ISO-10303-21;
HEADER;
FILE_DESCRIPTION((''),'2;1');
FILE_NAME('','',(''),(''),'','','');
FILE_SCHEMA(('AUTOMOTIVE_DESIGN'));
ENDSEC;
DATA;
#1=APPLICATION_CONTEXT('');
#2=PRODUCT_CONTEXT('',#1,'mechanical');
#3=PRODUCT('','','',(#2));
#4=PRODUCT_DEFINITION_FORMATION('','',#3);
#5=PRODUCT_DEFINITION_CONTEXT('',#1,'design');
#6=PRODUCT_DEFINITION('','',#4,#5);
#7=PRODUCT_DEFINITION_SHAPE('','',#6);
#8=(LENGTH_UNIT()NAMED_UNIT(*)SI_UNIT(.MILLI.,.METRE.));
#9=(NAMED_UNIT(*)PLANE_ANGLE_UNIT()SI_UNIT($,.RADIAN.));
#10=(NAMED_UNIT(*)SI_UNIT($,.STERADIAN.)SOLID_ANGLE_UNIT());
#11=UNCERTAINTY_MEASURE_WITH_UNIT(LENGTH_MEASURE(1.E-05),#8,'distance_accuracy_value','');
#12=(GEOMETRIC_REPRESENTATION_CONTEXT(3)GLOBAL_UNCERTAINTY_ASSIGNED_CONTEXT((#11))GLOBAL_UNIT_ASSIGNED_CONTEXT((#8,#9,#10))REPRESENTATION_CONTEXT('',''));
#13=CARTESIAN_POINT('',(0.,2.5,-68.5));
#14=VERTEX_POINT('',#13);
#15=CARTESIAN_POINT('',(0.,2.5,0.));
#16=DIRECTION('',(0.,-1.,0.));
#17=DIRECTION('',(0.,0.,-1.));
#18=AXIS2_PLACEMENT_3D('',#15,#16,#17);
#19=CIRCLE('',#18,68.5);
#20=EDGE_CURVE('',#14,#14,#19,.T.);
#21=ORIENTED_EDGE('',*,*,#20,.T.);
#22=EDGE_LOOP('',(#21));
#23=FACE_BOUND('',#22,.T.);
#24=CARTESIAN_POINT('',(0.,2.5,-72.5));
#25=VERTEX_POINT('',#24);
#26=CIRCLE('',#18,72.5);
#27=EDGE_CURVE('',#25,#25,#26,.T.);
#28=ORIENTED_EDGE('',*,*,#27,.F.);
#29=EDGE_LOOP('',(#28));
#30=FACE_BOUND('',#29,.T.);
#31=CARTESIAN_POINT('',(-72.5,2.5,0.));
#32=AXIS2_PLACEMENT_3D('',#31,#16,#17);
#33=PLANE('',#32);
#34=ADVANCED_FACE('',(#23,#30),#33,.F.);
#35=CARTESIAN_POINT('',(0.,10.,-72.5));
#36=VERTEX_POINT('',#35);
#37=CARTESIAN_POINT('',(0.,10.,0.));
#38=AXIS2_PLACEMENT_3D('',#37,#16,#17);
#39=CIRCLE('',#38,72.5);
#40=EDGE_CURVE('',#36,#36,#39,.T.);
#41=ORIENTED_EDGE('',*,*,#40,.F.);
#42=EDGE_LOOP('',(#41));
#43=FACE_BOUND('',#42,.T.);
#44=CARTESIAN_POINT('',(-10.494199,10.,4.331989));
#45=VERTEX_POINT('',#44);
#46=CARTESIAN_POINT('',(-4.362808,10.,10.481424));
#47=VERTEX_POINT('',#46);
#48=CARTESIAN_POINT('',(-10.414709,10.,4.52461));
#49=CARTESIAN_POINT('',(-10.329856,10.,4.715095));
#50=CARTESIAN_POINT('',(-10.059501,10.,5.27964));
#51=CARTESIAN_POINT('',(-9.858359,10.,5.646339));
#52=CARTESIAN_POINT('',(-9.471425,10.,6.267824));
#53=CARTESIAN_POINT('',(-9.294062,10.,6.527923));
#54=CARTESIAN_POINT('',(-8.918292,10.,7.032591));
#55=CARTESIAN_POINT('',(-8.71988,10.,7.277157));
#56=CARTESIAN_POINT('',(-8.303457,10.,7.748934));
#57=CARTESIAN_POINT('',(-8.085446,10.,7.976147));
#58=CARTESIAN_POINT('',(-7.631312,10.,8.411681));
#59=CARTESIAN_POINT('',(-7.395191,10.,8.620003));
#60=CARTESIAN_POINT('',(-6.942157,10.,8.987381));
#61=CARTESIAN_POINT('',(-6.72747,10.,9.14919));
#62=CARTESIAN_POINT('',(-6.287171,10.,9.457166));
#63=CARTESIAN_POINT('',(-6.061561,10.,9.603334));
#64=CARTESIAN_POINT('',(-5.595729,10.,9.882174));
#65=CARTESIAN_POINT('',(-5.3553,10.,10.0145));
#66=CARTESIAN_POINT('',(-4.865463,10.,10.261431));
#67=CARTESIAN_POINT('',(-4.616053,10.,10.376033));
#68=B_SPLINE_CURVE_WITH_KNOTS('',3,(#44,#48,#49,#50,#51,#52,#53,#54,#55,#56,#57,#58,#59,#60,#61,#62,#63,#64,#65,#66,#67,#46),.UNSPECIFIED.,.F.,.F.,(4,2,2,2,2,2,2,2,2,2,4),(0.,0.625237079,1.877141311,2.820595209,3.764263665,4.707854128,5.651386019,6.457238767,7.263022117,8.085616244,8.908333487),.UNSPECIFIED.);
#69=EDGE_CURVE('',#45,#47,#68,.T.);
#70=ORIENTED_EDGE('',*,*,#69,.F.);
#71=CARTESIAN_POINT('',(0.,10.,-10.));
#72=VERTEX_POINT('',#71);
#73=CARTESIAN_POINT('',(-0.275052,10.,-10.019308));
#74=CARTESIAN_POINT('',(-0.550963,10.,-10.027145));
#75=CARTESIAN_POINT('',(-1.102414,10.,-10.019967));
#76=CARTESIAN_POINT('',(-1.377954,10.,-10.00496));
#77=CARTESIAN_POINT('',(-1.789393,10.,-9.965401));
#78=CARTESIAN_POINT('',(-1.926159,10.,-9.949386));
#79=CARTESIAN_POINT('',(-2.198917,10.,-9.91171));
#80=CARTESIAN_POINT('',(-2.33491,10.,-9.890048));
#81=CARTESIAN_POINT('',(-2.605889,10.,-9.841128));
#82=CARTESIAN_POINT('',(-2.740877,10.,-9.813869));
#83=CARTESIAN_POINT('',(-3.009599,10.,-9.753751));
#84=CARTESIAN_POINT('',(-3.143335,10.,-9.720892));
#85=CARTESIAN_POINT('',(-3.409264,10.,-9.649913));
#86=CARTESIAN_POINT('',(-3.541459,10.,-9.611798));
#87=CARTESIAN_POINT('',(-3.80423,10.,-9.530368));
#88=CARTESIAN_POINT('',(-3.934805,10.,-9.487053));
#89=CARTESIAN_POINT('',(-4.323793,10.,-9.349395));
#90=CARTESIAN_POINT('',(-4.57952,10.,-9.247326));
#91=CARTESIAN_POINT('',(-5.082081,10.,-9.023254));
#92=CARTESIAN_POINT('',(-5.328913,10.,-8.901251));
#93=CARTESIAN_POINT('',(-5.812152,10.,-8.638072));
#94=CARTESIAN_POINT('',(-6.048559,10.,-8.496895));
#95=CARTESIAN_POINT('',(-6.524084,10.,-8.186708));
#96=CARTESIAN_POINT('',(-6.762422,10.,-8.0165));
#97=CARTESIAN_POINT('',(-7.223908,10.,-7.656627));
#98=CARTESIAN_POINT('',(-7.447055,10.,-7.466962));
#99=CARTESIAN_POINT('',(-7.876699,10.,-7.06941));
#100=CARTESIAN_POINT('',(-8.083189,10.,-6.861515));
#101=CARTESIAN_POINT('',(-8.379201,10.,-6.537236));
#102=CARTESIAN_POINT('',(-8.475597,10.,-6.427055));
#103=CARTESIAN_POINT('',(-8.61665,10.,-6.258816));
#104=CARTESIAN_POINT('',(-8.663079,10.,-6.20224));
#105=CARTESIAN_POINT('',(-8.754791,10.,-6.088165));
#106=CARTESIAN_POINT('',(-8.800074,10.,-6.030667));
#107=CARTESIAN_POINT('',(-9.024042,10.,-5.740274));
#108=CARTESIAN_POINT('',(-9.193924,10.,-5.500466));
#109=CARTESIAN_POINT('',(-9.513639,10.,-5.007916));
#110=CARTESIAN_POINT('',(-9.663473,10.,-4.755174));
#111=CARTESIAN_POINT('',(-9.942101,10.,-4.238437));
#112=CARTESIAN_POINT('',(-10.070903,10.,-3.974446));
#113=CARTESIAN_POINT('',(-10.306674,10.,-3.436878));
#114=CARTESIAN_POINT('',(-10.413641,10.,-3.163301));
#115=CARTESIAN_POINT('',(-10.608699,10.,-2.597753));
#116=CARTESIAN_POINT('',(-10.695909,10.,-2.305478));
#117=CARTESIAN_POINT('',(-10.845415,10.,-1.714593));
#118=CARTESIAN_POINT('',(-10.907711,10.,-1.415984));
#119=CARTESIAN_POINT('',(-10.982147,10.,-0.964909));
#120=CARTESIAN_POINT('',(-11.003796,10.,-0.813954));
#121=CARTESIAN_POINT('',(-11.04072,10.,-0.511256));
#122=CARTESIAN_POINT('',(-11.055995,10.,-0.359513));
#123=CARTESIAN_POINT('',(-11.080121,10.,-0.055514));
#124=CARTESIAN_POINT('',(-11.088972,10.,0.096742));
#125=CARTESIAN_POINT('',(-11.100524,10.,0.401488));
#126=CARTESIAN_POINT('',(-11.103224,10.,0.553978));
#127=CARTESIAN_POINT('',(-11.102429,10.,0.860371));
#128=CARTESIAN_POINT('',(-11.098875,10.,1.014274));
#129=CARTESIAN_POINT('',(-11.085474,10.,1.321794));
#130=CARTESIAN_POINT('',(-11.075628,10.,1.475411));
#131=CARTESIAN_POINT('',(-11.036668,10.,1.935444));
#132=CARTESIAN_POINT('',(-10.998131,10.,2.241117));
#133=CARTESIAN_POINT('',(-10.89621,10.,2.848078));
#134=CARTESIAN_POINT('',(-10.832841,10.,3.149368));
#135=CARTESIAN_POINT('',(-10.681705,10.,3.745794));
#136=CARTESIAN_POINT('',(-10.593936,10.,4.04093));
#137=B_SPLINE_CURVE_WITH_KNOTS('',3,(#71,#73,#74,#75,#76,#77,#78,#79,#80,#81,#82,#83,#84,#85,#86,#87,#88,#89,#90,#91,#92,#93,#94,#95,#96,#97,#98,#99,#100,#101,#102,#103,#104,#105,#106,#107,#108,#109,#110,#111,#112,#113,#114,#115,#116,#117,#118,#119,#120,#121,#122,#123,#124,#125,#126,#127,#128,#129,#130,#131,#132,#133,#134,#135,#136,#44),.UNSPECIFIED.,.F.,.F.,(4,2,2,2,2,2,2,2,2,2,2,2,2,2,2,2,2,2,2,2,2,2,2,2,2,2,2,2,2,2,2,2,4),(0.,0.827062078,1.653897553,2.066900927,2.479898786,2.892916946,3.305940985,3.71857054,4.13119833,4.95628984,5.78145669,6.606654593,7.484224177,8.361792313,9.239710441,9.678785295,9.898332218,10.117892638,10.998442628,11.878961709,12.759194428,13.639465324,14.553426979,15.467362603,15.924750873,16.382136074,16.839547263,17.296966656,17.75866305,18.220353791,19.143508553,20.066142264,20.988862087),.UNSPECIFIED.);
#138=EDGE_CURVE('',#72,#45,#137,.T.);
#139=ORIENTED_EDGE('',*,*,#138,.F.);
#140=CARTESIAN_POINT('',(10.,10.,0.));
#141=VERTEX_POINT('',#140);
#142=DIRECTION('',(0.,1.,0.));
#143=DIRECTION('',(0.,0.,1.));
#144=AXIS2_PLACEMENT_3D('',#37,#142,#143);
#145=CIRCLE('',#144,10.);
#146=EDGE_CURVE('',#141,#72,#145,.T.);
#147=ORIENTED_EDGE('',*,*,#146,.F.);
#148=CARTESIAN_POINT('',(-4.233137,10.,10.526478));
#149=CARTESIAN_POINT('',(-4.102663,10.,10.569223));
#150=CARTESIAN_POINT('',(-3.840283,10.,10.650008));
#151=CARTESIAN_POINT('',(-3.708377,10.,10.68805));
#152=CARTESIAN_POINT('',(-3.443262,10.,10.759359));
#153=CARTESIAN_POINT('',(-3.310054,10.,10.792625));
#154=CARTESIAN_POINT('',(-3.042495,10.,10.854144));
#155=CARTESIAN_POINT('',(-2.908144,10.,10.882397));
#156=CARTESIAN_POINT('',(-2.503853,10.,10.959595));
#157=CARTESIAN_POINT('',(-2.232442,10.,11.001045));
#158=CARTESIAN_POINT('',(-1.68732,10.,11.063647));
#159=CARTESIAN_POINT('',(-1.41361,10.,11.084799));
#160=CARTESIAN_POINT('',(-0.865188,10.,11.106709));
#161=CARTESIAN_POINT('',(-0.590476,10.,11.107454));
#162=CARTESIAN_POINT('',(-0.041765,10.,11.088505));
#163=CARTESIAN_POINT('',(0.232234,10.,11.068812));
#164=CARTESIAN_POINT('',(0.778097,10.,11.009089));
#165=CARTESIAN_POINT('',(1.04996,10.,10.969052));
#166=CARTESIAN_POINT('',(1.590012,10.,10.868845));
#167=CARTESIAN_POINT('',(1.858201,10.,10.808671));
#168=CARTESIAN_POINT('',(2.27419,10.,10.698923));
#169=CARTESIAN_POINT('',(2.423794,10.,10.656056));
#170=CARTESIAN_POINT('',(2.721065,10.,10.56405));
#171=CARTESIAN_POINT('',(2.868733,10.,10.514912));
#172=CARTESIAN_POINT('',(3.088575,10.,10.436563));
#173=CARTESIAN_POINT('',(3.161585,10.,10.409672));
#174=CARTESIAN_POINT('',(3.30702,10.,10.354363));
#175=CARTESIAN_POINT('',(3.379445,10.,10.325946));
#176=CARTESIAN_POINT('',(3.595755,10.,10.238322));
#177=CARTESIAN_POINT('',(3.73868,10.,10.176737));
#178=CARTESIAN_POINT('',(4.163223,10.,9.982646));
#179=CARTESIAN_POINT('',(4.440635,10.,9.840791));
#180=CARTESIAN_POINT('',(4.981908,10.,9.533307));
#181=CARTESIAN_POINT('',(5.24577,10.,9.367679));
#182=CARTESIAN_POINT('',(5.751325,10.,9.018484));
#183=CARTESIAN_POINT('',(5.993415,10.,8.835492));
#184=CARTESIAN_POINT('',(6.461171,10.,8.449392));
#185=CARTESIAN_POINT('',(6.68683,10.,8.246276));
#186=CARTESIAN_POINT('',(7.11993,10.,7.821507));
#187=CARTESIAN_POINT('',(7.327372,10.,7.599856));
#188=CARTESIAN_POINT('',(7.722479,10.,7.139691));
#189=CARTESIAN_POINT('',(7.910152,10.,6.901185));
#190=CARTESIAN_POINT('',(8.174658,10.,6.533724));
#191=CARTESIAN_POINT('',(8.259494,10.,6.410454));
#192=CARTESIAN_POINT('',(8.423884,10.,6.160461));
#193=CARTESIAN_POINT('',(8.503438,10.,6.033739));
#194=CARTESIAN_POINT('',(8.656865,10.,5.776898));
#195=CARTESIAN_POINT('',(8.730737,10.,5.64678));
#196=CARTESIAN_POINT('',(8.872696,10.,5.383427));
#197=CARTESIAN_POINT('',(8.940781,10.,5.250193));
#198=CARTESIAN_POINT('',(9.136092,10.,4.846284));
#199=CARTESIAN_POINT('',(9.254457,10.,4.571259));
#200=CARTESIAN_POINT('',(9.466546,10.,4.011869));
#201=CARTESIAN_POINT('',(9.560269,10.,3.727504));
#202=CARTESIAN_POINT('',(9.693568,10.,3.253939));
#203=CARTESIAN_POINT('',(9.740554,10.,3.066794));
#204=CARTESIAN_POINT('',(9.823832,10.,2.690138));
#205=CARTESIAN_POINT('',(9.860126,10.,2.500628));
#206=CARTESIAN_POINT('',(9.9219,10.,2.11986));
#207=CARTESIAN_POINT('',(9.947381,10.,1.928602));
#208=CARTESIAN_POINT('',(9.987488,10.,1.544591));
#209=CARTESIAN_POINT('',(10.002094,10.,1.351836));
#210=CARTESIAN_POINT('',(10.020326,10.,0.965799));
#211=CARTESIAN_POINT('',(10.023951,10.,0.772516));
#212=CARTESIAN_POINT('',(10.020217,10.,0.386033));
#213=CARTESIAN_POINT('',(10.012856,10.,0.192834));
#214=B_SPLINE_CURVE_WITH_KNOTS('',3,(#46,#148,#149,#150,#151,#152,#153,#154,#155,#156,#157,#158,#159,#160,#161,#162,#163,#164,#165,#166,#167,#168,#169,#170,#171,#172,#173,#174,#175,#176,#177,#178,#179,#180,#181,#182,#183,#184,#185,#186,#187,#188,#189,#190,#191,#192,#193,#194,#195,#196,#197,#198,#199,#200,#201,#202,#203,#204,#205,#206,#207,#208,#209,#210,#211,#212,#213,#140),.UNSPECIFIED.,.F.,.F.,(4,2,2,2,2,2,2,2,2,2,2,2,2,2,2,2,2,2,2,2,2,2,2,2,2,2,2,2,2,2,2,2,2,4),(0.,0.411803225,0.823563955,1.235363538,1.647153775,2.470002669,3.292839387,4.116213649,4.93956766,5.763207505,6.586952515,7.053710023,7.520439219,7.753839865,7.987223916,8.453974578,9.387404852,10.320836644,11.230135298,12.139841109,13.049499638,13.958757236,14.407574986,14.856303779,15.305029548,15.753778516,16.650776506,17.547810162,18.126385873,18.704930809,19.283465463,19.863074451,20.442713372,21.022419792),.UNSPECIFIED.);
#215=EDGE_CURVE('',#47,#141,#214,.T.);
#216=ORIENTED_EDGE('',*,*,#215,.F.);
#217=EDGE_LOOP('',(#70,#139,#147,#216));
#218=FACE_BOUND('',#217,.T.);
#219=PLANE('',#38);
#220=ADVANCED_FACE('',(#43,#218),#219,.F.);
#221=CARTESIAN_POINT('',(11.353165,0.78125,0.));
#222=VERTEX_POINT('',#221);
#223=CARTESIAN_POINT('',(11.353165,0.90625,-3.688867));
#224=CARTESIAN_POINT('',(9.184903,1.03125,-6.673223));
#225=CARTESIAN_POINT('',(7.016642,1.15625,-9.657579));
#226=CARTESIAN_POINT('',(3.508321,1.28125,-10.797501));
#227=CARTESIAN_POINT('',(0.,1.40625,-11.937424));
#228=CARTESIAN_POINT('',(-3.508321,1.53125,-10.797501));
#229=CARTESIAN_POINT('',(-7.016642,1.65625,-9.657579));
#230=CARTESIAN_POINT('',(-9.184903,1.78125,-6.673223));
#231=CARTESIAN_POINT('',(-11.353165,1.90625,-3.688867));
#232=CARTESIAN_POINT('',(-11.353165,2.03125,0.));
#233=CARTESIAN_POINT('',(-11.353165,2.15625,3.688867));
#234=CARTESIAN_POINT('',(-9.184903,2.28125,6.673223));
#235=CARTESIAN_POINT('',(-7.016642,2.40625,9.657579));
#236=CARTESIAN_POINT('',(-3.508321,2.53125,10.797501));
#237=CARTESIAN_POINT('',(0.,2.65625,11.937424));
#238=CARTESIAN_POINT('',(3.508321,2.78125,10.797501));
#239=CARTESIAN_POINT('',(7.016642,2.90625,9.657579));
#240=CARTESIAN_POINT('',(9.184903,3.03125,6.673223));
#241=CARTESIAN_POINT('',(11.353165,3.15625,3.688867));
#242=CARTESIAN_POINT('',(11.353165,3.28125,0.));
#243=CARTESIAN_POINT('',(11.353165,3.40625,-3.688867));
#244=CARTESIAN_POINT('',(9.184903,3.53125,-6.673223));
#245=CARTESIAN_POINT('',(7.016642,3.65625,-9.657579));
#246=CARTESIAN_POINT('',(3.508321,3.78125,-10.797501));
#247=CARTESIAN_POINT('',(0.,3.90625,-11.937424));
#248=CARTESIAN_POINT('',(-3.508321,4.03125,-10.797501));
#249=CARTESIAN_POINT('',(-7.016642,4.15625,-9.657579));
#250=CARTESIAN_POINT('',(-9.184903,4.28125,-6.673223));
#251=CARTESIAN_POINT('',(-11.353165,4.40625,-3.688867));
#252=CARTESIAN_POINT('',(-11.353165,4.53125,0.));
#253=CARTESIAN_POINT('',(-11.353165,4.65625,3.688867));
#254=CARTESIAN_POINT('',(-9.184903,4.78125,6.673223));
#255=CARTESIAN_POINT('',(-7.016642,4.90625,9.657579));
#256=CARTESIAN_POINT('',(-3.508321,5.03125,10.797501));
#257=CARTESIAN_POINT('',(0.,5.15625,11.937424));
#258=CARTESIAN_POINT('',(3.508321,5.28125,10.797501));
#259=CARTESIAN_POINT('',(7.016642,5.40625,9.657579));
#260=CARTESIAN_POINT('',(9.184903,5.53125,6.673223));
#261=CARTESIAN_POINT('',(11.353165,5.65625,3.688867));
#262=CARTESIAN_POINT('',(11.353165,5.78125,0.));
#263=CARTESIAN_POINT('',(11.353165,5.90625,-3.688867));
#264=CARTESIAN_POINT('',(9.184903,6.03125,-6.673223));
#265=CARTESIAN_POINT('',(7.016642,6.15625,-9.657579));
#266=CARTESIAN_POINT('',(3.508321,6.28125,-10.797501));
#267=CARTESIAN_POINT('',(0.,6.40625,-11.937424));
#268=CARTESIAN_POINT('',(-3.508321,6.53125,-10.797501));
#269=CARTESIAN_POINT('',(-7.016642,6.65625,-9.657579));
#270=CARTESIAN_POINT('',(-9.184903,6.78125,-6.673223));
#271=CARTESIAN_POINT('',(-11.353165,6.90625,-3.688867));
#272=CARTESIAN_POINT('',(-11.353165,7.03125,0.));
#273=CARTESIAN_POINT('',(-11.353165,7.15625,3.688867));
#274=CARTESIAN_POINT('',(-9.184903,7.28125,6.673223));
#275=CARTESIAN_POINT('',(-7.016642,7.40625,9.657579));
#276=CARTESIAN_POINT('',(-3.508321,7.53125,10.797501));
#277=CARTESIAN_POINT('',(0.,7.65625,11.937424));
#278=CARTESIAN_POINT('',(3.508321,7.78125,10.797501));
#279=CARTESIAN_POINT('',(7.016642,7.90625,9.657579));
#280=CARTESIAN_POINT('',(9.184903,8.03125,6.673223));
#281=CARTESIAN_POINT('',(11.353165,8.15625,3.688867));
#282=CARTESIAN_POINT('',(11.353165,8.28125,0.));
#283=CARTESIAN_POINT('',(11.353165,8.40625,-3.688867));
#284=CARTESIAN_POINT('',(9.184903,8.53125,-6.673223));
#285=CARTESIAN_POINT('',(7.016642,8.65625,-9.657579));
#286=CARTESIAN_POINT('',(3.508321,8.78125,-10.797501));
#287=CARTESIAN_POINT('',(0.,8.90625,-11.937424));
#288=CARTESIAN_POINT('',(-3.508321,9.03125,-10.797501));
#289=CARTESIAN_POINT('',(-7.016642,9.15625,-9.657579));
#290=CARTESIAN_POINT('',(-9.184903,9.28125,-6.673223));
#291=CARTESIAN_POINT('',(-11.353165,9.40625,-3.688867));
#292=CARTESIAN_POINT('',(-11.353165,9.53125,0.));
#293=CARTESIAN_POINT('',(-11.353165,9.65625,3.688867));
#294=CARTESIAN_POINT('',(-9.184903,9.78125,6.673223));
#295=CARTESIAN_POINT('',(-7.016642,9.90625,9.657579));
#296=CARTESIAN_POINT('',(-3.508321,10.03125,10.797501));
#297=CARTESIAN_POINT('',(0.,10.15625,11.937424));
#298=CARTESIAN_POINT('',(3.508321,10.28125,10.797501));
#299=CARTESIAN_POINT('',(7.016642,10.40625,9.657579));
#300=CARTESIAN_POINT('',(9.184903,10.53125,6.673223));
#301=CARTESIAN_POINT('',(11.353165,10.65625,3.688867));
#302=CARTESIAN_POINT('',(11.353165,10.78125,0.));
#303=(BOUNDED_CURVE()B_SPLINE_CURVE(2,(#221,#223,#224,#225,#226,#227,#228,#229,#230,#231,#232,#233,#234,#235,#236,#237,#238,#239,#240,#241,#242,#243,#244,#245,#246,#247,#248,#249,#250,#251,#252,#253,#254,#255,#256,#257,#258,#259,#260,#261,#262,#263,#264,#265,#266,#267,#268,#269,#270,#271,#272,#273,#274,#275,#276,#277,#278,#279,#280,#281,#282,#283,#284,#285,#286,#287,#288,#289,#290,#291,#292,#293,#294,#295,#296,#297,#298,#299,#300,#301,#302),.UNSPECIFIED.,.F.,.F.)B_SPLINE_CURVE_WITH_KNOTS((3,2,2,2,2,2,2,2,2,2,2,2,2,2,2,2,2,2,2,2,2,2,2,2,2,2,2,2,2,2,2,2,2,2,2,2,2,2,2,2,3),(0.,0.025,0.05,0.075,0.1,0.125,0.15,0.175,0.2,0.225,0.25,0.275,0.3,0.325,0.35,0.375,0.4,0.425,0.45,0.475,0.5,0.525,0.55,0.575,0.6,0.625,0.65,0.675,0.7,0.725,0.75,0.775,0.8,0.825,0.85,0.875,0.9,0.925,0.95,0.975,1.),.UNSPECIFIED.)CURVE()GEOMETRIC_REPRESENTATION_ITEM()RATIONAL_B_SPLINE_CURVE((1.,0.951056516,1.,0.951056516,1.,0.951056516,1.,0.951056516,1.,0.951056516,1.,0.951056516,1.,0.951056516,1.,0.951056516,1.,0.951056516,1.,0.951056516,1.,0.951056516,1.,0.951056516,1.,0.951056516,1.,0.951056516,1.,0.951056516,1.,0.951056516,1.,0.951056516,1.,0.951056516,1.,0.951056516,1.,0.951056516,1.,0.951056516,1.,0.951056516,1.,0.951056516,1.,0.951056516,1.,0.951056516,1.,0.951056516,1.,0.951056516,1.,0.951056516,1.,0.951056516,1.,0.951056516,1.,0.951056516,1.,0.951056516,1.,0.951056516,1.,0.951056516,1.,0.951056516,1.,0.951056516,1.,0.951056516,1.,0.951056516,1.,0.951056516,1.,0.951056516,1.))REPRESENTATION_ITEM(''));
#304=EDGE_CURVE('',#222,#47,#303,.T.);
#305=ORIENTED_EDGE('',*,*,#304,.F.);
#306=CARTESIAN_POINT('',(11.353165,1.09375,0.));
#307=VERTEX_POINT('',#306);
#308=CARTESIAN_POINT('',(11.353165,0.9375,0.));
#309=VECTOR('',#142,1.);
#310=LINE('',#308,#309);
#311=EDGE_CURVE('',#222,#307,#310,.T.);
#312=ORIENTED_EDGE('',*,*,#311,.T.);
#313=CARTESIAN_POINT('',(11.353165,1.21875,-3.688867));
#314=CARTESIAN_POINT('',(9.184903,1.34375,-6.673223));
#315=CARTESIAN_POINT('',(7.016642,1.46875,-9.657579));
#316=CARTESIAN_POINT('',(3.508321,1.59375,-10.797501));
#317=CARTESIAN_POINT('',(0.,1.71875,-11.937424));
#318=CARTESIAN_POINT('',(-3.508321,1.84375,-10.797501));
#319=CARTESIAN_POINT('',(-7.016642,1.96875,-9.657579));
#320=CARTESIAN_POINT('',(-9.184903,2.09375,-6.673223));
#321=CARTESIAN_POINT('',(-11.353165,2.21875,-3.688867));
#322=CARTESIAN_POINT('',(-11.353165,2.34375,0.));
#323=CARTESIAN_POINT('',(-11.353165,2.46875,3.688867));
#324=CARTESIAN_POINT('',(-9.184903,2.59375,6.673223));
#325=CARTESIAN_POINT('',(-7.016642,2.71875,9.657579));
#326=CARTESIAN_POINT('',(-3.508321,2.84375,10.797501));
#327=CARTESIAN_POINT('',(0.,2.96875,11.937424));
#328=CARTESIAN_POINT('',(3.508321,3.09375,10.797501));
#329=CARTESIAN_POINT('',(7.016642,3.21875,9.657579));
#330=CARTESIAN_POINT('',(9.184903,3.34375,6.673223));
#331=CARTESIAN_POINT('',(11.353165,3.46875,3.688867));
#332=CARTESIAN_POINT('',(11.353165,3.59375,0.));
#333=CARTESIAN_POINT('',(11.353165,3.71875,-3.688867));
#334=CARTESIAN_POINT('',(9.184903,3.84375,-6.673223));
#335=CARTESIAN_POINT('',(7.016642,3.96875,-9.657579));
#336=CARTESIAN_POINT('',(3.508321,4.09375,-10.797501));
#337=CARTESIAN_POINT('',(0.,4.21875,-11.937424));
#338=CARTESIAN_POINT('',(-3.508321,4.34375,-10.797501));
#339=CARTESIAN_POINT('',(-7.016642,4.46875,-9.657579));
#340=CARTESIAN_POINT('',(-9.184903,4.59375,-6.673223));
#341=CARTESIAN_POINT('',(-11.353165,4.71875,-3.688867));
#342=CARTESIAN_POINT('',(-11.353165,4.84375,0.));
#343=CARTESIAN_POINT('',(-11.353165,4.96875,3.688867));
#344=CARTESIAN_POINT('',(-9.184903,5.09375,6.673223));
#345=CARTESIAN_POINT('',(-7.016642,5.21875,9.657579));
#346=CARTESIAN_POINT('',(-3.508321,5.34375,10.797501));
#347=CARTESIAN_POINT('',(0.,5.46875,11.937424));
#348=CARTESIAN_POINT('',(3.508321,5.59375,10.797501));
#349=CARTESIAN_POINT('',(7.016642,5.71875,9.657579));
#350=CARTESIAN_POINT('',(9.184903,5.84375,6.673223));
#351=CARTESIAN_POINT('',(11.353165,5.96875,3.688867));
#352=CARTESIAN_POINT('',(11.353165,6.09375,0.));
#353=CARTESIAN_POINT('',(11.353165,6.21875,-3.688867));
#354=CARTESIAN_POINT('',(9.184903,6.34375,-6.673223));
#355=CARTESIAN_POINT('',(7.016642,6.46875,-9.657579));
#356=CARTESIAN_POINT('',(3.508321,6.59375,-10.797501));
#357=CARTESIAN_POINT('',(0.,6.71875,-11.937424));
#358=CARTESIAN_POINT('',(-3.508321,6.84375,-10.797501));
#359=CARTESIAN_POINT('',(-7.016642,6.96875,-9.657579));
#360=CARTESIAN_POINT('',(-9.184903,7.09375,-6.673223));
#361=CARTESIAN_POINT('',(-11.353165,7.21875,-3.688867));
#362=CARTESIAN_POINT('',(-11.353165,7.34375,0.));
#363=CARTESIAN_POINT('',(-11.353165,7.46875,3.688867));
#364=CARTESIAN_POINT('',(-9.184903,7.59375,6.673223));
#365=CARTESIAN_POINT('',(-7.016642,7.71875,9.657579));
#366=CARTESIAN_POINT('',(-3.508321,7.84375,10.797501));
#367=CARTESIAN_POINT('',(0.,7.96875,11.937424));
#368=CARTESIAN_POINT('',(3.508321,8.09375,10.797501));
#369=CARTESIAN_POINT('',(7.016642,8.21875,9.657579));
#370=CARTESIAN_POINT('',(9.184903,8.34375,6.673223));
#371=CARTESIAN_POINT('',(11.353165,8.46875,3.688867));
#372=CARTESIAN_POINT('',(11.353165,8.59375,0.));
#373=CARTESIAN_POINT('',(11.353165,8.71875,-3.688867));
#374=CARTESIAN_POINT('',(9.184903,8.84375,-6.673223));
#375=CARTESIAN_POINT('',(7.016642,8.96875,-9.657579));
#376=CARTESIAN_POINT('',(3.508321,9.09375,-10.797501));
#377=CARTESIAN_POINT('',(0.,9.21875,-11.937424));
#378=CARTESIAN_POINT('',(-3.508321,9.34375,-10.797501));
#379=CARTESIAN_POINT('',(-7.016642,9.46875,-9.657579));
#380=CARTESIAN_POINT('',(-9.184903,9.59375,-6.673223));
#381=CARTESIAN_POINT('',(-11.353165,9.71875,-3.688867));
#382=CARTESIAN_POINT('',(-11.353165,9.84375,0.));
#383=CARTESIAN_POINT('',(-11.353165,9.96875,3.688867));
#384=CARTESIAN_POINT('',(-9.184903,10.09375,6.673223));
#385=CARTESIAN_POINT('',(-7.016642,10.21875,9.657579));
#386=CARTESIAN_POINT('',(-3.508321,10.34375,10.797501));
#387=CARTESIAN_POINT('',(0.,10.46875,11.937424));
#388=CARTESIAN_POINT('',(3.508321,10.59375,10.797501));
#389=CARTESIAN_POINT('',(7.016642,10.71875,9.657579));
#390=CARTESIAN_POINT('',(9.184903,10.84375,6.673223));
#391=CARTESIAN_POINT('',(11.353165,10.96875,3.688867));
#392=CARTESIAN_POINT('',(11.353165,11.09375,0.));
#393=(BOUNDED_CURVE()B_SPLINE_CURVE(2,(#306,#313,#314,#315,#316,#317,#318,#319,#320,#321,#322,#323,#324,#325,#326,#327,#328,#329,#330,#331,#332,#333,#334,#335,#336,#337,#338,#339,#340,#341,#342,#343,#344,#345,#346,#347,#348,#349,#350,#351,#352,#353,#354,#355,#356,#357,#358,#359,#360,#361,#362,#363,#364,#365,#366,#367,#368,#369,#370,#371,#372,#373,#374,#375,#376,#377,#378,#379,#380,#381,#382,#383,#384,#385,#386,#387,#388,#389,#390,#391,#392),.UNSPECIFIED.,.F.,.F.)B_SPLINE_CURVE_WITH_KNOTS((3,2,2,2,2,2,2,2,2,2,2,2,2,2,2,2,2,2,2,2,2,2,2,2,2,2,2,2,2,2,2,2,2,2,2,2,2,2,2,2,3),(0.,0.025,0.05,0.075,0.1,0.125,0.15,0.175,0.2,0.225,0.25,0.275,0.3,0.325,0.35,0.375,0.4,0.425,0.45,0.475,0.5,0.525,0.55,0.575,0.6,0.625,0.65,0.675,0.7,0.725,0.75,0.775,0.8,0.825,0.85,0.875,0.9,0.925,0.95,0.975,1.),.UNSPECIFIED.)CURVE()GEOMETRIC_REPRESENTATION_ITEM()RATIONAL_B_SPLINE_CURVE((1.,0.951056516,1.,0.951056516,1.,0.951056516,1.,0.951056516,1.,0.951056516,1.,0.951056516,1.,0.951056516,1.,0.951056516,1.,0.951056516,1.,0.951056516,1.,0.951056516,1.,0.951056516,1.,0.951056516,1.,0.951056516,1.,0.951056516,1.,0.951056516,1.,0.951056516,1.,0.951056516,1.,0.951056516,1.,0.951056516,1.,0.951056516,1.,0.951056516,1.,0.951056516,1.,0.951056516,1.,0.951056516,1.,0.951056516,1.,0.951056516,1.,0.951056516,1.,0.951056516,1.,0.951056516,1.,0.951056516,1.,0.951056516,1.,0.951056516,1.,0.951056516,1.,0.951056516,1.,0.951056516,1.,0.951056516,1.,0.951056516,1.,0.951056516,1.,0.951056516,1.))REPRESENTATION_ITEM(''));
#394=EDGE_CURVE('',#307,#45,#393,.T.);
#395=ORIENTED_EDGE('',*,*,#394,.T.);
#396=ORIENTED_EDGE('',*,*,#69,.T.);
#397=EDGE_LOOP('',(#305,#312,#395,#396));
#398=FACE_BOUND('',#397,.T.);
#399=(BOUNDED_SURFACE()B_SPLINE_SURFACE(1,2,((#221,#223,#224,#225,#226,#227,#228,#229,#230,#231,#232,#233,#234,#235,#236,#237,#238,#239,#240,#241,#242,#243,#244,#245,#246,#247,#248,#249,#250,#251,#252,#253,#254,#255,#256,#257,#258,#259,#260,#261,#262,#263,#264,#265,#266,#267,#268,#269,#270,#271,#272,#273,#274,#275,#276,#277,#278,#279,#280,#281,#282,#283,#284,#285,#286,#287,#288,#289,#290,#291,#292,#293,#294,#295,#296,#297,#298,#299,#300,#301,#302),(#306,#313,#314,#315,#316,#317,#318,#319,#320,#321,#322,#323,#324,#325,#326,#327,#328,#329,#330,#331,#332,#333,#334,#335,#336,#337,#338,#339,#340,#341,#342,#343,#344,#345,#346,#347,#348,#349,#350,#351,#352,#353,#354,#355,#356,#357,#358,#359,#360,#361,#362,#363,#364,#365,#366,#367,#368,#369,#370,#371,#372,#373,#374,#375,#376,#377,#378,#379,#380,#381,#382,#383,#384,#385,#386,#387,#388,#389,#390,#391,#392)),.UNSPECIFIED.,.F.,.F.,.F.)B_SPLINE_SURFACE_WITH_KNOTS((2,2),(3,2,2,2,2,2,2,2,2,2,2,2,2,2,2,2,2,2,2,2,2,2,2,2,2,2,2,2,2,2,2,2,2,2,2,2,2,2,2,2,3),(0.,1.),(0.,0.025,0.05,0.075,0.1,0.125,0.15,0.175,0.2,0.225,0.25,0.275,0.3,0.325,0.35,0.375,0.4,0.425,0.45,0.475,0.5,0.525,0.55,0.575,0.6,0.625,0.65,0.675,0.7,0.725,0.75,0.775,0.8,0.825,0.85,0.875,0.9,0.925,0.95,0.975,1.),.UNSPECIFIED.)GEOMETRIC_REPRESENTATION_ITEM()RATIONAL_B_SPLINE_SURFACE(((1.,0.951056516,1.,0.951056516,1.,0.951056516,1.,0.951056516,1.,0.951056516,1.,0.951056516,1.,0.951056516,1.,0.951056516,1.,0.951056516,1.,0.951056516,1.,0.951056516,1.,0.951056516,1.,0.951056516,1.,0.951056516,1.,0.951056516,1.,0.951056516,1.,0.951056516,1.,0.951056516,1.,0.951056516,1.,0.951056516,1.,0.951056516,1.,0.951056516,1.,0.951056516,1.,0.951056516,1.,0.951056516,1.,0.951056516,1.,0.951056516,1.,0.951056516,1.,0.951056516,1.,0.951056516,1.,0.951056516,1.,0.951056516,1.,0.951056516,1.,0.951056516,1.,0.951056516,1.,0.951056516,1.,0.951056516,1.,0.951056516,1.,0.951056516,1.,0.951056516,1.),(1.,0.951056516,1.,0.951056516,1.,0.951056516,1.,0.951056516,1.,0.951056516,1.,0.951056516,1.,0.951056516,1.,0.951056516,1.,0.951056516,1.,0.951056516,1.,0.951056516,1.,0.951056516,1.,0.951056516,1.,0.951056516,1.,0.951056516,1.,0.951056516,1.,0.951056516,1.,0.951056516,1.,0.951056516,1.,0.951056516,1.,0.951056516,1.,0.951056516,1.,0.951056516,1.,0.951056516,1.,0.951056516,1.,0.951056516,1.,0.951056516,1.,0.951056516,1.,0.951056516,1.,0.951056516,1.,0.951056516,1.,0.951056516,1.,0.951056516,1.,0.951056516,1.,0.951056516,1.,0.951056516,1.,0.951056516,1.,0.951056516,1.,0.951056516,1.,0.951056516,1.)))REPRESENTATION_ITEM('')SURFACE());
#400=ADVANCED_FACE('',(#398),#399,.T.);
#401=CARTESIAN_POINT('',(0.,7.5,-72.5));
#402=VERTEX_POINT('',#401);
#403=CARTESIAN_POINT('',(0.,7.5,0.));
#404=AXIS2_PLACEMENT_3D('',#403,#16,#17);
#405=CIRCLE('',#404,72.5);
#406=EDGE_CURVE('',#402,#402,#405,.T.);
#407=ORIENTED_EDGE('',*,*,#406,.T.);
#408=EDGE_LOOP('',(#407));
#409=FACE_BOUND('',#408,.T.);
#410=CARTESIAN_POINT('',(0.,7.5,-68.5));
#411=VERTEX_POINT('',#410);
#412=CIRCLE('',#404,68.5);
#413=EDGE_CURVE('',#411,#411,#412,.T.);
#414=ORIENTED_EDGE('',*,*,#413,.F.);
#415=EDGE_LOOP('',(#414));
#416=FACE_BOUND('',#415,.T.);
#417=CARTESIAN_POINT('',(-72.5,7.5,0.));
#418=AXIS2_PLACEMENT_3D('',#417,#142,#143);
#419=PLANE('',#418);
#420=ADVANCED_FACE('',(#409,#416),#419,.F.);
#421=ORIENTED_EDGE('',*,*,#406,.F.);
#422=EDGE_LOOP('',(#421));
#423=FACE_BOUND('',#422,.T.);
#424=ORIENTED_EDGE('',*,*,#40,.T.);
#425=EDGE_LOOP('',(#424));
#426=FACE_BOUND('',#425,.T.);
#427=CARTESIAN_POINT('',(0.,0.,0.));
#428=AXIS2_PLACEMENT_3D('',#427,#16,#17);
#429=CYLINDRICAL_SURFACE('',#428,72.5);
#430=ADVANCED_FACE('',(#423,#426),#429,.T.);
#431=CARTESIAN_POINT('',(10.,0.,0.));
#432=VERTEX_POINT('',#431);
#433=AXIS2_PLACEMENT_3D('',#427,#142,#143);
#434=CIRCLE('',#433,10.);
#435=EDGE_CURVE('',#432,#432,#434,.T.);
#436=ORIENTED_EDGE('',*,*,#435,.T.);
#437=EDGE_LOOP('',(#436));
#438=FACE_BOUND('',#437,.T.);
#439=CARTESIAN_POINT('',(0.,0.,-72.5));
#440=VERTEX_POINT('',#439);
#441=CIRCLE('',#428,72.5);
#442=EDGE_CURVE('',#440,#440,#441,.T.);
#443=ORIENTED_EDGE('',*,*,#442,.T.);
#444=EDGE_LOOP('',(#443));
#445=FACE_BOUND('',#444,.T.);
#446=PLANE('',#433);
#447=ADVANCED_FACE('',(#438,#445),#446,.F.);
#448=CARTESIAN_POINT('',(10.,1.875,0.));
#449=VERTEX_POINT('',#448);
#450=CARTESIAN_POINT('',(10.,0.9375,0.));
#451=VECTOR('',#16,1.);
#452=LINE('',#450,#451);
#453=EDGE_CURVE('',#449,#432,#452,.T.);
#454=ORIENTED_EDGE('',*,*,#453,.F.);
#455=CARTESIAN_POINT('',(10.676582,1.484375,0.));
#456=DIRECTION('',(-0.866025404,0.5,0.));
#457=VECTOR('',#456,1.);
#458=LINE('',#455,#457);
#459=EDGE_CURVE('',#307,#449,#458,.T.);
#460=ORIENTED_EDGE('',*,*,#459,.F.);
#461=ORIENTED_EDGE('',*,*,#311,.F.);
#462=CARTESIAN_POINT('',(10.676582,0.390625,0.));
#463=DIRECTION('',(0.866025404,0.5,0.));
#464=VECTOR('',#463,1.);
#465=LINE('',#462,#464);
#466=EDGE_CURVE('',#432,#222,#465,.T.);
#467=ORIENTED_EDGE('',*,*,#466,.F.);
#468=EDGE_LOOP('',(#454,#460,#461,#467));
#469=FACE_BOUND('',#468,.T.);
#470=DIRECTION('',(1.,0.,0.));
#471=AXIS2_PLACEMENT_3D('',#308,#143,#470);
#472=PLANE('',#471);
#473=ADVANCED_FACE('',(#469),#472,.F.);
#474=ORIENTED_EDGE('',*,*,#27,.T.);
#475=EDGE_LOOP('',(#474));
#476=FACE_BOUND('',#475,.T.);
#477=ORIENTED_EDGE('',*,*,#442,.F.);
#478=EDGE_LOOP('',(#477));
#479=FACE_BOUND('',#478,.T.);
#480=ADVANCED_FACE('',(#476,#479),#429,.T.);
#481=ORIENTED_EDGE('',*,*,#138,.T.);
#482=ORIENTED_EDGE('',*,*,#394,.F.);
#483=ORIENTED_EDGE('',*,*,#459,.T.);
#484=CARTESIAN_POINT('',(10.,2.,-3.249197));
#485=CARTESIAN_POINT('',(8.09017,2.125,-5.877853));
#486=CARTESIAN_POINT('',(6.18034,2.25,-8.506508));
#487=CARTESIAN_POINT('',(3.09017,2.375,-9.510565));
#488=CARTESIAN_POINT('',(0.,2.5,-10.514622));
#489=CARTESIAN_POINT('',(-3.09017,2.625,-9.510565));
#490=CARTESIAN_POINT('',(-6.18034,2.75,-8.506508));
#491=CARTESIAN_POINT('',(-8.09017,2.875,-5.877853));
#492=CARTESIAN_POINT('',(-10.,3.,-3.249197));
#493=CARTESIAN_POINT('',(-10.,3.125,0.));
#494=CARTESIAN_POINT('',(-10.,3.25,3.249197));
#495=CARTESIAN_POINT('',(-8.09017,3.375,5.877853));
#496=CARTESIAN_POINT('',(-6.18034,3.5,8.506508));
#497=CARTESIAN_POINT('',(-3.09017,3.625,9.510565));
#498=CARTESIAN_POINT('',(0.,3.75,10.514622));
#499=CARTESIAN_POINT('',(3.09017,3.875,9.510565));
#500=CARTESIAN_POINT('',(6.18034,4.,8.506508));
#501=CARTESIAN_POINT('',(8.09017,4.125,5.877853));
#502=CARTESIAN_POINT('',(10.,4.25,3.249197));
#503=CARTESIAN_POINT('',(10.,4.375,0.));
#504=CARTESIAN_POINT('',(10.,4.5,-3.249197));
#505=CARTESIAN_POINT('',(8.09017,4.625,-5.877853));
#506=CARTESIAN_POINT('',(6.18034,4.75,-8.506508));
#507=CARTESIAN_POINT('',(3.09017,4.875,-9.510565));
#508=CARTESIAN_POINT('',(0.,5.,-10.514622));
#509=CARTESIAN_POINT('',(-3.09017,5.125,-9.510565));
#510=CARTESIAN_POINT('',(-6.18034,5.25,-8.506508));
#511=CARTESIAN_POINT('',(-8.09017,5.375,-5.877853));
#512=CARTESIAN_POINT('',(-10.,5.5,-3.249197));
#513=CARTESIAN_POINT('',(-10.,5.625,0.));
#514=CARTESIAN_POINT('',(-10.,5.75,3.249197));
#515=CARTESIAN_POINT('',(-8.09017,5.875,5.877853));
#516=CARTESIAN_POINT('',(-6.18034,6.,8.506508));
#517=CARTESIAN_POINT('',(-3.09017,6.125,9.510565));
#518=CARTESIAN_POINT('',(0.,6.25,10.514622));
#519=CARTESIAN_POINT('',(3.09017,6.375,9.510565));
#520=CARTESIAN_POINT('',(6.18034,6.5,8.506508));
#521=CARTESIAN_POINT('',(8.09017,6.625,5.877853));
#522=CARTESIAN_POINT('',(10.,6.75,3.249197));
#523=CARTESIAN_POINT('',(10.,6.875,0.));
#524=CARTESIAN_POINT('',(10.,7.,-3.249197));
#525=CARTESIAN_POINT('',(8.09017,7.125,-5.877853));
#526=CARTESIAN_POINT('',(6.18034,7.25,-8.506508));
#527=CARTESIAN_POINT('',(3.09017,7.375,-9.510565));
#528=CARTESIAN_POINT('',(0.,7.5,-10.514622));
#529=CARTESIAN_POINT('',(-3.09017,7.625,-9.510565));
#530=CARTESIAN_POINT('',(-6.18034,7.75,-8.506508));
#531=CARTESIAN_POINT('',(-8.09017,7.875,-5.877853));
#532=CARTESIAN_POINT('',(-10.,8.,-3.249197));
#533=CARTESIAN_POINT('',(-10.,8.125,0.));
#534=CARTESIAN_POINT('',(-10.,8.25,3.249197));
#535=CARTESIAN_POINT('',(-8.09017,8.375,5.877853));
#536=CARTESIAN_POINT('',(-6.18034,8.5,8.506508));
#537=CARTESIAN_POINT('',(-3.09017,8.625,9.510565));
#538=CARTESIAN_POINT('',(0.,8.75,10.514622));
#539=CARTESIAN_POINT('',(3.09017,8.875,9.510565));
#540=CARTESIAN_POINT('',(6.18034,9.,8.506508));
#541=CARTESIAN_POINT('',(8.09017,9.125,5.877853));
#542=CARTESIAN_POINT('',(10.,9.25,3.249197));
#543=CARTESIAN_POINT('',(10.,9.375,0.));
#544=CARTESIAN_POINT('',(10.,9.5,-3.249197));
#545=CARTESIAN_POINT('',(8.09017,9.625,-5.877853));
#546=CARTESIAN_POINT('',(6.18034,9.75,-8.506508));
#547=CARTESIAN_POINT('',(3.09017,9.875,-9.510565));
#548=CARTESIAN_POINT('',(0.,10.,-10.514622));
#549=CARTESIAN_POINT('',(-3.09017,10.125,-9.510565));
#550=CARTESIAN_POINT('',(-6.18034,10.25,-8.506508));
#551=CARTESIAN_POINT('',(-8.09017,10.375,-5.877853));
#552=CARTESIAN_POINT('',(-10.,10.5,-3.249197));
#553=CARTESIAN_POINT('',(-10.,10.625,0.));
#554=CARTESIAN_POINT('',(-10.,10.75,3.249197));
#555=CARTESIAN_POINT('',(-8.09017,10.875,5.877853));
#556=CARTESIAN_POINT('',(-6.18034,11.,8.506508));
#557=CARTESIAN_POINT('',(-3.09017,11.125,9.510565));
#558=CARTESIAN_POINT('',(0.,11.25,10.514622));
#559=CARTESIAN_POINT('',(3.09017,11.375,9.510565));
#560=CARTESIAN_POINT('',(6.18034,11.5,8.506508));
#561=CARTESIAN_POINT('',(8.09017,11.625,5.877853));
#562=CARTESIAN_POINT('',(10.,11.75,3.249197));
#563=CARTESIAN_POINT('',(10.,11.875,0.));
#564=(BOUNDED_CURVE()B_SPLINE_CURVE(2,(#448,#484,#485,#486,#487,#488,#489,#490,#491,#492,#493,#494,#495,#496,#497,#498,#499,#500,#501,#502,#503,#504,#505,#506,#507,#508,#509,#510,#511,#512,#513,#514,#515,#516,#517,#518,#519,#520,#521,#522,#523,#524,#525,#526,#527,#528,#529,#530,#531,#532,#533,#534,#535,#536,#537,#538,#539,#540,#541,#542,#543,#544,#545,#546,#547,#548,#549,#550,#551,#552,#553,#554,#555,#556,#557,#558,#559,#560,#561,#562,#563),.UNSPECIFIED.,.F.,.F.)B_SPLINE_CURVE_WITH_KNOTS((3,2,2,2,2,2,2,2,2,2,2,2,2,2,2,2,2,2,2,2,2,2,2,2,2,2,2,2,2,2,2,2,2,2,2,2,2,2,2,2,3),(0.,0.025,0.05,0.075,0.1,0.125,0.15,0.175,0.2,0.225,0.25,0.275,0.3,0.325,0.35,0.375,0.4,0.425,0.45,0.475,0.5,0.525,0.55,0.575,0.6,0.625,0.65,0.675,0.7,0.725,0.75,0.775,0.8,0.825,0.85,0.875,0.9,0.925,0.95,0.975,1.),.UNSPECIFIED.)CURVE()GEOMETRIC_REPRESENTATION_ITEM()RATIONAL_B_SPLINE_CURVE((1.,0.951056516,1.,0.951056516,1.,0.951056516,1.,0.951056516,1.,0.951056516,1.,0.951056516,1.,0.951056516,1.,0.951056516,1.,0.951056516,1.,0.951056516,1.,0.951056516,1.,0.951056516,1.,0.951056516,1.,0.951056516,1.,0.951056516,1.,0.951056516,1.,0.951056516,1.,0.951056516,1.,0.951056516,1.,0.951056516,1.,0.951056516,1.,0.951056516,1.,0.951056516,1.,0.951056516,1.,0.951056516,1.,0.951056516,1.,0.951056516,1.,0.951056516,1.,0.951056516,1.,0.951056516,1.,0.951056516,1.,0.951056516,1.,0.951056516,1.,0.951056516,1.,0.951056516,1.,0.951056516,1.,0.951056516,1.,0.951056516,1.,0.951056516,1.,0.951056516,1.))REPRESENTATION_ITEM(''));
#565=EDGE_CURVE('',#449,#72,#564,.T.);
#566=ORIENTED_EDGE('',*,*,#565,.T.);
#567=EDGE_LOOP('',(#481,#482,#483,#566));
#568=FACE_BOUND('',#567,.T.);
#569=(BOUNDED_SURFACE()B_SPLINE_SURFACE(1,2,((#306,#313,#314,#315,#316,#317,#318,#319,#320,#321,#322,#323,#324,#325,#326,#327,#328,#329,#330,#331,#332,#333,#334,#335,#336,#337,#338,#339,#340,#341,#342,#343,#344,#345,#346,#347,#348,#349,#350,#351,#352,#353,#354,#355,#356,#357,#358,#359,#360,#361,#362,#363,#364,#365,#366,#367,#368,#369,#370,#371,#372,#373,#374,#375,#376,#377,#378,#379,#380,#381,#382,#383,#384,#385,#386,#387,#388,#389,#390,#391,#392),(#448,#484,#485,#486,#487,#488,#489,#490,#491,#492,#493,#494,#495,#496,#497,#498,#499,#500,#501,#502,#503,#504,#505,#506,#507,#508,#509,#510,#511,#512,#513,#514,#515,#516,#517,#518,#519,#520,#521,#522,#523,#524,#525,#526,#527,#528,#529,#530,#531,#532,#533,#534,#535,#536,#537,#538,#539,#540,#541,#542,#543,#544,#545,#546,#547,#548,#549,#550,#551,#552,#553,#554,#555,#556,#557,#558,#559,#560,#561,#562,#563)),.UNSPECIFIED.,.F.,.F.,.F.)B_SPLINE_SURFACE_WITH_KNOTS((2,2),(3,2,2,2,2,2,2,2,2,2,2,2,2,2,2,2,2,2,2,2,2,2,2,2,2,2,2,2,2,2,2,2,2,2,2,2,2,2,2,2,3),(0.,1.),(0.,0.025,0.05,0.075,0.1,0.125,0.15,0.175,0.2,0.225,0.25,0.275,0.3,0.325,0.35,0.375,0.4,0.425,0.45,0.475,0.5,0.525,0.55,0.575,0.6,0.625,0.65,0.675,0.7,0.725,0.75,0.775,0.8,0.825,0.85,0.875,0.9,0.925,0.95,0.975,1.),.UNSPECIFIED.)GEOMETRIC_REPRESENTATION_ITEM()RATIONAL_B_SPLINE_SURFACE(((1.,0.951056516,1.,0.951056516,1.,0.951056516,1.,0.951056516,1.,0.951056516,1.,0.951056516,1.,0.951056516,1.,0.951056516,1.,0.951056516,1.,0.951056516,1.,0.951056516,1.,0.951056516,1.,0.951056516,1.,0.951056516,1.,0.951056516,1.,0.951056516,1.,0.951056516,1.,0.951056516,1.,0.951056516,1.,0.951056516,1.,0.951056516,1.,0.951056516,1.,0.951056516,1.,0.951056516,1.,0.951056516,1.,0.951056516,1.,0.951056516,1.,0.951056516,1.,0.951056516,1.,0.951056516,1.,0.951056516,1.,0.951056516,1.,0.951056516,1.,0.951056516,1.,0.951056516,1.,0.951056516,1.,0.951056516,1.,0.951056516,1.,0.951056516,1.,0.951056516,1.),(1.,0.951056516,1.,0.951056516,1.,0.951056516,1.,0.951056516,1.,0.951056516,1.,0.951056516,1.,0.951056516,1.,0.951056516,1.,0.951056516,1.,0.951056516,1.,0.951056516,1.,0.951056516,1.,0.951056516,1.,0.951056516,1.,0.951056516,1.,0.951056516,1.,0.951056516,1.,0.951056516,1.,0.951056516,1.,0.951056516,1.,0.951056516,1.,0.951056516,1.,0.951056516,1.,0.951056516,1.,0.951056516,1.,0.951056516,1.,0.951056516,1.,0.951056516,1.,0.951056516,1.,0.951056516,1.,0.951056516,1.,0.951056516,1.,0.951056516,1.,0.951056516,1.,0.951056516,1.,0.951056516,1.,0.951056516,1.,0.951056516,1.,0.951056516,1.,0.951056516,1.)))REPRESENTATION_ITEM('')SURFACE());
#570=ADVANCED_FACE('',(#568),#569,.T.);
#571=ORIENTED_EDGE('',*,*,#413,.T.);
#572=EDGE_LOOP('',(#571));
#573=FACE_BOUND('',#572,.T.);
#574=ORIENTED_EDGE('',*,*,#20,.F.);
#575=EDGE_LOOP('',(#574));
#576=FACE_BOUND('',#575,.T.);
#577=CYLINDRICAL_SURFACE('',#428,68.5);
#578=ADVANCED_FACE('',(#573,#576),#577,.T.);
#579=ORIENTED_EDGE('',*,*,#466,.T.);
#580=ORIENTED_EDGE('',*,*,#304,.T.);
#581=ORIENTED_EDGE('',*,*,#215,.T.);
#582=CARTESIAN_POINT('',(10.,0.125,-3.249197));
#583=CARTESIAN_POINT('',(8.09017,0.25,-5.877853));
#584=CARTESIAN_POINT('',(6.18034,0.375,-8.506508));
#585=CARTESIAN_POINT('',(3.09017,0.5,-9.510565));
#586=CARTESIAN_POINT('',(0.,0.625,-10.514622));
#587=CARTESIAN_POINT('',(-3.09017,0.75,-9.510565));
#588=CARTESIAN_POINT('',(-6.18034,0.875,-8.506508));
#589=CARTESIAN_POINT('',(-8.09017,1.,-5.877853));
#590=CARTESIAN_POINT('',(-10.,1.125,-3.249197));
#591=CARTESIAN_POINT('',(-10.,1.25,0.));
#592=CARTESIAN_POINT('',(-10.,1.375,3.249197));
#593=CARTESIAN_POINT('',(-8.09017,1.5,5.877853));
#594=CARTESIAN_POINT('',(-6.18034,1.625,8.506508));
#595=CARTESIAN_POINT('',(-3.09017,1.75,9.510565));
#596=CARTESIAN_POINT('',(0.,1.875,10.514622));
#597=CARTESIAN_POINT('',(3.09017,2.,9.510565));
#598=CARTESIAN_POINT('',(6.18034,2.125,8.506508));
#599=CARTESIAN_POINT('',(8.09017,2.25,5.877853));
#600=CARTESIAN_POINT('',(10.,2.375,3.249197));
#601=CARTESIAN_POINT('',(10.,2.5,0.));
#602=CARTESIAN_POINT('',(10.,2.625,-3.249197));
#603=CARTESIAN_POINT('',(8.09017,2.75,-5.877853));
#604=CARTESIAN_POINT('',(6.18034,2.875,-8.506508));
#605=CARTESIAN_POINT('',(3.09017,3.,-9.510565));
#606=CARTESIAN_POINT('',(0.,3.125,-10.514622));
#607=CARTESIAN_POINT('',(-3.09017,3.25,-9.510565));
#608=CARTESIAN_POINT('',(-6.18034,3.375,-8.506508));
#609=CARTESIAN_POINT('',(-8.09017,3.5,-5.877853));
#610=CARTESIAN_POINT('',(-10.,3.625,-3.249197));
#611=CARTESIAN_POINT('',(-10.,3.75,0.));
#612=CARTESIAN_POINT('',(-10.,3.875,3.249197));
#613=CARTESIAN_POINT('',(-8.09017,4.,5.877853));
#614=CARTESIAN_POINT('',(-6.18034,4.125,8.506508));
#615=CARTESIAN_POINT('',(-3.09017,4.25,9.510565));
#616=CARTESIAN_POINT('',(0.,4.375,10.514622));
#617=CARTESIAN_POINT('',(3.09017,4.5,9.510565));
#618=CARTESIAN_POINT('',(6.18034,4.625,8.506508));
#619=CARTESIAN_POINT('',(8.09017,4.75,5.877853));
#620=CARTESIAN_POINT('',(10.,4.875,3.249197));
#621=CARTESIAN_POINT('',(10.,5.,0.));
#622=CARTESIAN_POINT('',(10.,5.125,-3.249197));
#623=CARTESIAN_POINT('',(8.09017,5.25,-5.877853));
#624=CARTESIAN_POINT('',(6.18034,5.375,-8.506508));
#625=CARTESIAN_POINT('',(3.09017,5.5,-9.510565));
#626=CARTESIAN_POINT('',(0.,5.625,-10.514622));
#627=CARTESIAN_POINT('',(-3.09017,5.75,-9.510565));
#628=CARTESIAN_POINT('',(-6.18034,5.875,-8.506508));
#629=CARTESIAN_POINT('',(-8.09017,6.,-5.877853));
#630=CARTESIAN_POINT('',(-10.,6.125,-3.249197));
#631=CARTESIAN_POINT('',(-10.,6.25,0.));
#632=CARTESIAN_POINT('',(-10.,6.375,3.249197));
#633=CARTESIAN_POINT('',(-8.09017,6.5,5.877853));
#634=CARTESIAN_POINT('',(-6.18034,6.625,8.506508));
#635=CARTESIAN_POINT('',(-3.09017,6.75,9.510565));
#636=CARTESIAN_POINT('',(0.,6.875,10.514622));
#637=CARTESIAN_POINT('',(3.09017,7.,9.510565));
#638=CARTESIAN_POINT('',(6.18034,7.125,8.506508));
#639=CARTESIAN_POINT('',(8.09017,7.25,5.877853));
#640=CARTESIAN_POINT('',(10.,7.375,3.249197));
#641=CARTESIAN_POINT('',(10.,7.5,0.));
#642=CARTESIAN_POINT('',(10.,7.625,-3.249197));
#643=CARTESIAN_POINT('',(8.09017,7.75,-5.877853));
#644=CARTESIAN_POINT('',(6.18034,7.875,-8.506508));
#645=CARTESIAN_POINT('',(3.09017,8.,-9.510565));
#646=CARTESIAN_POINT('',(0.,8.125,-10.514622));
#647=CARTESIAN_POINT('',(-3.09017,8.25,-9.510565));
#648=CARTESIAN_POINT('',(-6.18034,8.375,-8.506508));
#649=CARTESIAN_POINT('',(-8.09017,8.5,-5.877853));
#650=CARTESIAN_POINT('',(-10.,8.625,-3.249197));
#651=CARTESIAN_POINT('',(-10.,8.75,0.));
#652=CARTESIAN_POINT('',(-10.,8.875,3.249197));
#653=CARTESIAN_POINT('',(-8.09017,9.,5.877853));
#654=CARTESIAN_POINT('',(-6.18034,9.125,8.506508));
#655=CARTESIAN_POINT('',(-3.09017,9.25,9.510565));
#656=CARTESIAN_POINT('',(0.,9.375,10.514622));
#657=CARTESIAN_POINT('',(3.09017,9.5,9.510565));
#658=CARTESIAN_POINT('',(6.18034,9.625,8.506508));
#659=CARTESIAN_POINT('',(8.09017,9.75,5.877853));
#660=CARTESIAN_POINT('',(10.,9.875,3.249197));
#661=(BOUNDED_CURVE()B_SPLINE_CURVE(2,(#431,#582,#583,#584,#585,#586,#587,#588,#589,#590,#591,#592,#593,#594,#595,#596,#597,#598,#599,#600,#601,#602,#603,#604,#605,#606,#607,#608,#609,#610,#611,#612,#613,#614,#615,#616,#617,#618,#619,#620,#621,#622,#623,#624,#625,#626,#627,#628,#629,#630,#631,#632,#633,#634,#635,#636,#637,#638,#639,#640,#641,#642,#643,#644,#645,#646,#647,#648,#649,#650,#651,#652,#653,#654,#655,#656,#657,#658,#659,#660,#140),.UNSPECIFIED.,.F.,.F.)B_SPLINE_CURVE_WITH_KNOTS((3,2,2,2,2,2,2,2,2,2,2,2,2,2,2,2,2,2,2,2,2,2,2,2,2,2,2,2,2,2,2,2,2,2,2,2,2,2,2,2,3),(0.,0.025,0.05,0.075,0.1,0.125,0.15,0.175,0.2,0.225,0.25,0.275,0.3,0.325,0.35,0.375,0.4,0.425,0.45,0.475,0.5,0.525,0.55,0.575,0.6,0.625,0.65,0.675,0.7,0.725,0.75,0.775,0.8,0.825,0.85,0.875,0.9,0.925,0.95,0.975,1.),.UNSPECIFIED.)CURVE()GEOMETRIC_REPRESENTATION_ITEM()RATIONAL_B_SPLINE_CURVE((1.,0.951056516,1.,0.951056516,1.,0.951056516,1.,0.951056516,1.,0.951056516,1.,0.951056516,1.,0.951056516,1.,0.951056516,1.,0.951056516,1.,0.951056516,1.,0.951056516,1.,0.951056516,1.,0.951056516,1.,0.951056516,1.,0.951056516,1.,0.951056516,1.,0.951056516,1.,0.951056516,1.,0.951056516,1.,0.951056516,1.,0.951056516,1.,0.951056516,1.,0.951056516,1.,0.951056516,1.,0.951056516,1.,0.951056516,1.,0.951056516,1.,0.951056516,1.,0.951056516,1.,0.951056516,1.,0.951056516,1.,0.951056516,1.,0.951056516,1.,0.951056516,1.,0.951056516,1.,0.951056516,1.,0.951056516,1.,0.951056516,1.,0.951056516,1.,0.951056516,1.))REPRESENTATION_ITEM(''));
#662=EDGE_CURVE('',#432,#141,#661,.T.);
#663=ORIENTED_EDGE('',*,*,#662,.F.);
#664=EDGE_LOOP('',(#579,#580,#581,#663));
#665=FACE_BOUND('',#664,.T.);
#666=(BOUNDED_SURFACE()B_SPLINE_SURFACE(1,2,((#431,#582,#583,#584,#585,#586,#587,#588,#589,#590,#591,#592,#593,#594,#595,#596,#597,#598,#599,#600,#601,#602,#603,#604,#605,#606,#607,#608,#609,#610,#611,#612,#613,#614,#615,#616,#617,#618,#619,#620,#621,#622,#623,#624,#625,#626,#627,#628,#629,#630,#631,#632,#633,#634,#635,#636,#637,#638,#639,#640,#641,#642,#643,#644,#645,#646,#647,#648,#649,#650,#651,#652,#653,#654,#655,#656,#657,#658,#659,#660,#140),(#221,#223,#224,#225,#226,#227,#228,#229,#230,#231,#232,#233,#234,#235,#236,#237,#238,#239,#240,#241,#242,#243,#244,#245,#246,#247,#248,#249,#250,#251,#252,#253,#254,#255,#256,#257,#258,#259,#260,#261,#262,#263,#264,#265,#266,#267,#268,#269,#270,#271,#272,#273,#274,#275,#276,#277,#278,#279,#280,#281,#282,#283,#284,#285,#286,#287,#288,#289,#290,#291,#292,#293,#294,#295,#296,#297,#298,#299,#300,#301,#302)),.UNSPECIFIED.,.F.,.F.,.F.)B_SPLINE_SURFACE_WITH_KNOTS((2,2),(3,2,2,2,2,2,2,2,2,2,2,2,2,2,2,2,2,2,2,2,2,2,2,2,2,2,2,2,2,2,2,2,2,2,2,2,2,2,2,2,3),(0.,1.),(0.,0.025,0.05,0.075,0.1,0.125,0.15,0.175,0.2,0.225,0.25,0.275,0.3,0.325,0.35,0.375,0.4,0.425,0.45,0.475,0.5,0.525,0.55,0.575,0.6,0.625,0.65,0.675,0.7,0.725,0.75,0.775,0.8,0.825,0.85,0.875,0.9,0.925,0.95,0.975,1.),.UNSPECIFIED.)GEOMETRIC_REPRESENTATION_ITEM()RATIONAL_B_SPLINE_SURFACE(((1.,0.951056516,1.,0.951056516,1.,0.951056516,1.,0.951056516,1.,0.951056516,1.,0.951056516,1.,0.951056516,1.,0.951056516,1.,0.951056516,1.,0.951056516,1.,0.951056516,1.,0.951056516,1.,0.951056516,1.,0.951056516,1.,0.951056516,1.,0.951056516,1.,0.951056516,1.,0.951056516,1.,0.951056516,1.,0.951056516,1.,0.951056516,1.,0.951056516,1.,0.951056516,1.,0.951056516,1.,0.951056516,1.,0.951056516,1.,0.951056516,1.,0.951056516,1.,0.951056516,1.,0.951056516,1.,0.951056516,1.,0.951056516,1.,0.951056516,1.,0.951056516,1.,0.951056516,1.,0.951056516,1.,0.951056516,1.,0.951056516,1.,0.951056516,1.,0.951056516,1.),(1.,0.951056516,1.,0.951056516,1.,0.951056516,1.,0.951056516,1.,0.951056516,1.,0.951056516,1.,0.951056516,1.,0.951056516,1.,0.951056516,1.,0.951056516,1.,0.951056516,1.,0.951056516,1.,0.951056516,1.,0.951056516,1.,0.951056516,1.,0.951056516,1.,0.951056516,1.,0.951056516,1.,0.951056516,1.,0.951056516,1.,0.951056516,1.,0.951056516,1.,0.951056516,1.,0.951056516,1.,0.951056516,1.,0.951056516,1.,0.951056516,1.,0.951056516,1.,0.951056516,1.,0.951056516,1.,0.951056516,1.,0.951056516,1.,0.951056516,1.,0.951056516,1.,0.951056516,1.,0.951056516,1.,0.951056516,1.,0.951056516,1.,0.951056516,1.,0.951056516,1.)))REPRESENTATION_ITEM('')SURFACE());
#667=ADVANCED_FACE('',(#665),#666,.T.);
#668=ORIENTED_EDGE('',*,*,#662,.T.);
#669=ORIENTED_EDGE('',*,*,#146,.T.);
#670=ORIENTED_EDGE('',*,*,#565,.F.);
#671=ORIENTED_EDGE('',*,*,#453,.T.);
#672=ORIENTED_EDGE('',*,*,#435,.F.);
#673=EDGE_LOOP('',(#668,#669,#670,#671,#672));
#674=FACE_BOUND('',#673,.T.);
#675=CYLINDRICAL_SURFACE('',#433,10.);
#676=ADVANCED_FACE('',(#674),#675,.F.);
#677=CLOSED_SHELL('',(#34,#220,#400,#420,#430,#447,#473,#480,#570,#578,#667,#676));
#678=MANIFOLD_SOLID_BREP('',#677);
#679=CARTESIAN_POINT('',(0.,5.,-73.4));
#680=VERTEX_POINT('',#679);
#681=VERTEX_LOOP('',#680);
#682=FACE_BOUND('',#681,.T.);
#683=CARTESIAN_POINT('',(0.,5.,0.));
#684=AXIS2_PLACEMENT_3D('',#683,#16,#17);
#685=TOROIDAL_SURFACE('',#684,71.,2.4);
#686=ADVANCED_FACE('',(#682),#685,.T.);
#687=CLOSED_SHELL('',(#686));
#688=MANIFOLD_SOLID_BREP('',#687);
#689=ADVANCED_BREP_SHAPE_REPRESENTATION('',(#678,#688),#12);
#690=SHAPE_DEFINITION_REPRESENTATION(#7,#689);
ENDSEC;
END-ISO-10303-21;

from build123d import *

# Parameters (mm, degrees)
SKETCH4_R          = 2.4
SKETCH9_R          = 10
CUT_EXTRUDE2_DEPTH = 10
THREAD1_PITCH      = 2.5


with BuildPart() as part:
    # Sketch2 → Revolve1 (revolve)
    with BuildSketch(Plane.XY, mode=Mode.PRIVATE) as revolve1_sk:
        Polygon((0, 0), (-72.5, 0), (-72.5, 2.5), (-68.5, 2.5), (-68.5, 7.5), (-72.5, 7.5), (-72.5, 10), (0, 10), align=None)
    revolve(revolve1_sk.sketch.rotate(Axis((0, 0, 0), (0, 1, 0)), 270), axis=Axis((0, 0, 0), (0, 1, 0)))

    # Sketch9 → Cut-Extrude2 (cut)
    with BuildSketch(Plane(origin=(0, 10, 0), x_dir=(1, 0, 0), z_dir=(0, 1, 0))):
        with Locations(Location((0, 0, 0), (0, 0, 270))):
            Circle(SKETCH9_R)
    extrude(amount=-CUT_EXTRUDE2_DEPTH, mode=Mode.SUBTRACT)

    # Thread1: the profile of Thread Profile1 profile screwed along a right-hand helix of 4 turns, 10 arcs to a turn; built about Z, then put on its axis
    thread1_z = Axis((0, 0, 0), (0, 0, 1))
    thread1_corners = [(9.9997, 0, -0.000173205), (11.353164687, 0, 0.781249997), (11.353164687, 0, 1.093749997), (9.9997, 0, 1.875173198)]
    with BuildLine(mode=Mode.PRIVATE) as thread1_profile:
        Line(thread1_corners[0], thread1_corners[1])
        Line(thread1_corners[1], thread1_corners[2])
        Line(thread1_corners[2], thread1_corners[3])
        Line(thread1_corners[3], thread1_corners[0])
    thread1_cap = Face(thread1_profile.wire())
    thread1_turn_angles = [0, 18, 36, 54, 72, 90, 108, 126, 144, 162, 180, 198, 216, 234, 252, 270, 288, 306, 324, 342, 360]
    thread1_turn_weights = [1, 0.9510565162951535, 1, 0.9510565162951535, 1, 0.9510565162951535, 1, 0.9510565162951535, 1, 0.9510565162951535, 1, 0.9510565162951535, 1, 0.9510565162951535, 1, 0.9510565162951535, 1, 0.9510565162951535, 1, 0.9510565162951535, 1]
    thread1_turn_rails = [Edge.make_bspline([Vector(p[0], p[1], 0).rotate(thread1_z, thread1_turn_angles[k]) / thread1_turn_weights[k] + Vector(0, 0, p[2] + THREAD1_PITCH * thread1_turn_angles[k] / 360) for k in range(21)], [0, 0, 0, 1, 1, 2, 2, 3, 3, 4, 4, 5, 5, 6, 6, 7, 7, 8, 8, 9, 9, 10, 10, 10], 2, thread1_turn_weights) for p in thread1_corners]
    thread1_turn_sides = [Face.make_surface_from_curves(thread1_turn_rails[p[0]], thread1_turn_rails[p[1]]) for p in [(0, 1), (1, 2), (2, 3), (3, 0)]]
    thread1 = Plane(origin=(0, 0, 0), x_dir=(1, 0, 0), z_dir=(0, 1, 0)) * Solid(Shell([*[p.moved(Location((0, 0, THREAD1_PITCH * i))) for i in range(4) for p in thread1_turn_sides], thread1_cap, thread1_cap.rotate(thread1_z, 1440).moved(Location((0, 0, THREAD1_PITCH * 1440 / 360)))]))
    add(thread1, mode=Mode.SUBTRACT)


with BuildPart() as body_2:
    # Sketch4 → Revolve2 (revolve)
    with BuildSketch(Plane.XY, mode=Mode.PRIVATE) as revolve2_sk:
        with Locations((-71, 5)):
            Circle(SKETCH4_R)
    revolve(revolve2_sk.sketch.rotate(Axis((0, 0, 0), (0, 1, 0)), 270), axis=Axis((0, 0, 0), (0, 1, 0)))


solid = Compound([part.part, body_2.part])
